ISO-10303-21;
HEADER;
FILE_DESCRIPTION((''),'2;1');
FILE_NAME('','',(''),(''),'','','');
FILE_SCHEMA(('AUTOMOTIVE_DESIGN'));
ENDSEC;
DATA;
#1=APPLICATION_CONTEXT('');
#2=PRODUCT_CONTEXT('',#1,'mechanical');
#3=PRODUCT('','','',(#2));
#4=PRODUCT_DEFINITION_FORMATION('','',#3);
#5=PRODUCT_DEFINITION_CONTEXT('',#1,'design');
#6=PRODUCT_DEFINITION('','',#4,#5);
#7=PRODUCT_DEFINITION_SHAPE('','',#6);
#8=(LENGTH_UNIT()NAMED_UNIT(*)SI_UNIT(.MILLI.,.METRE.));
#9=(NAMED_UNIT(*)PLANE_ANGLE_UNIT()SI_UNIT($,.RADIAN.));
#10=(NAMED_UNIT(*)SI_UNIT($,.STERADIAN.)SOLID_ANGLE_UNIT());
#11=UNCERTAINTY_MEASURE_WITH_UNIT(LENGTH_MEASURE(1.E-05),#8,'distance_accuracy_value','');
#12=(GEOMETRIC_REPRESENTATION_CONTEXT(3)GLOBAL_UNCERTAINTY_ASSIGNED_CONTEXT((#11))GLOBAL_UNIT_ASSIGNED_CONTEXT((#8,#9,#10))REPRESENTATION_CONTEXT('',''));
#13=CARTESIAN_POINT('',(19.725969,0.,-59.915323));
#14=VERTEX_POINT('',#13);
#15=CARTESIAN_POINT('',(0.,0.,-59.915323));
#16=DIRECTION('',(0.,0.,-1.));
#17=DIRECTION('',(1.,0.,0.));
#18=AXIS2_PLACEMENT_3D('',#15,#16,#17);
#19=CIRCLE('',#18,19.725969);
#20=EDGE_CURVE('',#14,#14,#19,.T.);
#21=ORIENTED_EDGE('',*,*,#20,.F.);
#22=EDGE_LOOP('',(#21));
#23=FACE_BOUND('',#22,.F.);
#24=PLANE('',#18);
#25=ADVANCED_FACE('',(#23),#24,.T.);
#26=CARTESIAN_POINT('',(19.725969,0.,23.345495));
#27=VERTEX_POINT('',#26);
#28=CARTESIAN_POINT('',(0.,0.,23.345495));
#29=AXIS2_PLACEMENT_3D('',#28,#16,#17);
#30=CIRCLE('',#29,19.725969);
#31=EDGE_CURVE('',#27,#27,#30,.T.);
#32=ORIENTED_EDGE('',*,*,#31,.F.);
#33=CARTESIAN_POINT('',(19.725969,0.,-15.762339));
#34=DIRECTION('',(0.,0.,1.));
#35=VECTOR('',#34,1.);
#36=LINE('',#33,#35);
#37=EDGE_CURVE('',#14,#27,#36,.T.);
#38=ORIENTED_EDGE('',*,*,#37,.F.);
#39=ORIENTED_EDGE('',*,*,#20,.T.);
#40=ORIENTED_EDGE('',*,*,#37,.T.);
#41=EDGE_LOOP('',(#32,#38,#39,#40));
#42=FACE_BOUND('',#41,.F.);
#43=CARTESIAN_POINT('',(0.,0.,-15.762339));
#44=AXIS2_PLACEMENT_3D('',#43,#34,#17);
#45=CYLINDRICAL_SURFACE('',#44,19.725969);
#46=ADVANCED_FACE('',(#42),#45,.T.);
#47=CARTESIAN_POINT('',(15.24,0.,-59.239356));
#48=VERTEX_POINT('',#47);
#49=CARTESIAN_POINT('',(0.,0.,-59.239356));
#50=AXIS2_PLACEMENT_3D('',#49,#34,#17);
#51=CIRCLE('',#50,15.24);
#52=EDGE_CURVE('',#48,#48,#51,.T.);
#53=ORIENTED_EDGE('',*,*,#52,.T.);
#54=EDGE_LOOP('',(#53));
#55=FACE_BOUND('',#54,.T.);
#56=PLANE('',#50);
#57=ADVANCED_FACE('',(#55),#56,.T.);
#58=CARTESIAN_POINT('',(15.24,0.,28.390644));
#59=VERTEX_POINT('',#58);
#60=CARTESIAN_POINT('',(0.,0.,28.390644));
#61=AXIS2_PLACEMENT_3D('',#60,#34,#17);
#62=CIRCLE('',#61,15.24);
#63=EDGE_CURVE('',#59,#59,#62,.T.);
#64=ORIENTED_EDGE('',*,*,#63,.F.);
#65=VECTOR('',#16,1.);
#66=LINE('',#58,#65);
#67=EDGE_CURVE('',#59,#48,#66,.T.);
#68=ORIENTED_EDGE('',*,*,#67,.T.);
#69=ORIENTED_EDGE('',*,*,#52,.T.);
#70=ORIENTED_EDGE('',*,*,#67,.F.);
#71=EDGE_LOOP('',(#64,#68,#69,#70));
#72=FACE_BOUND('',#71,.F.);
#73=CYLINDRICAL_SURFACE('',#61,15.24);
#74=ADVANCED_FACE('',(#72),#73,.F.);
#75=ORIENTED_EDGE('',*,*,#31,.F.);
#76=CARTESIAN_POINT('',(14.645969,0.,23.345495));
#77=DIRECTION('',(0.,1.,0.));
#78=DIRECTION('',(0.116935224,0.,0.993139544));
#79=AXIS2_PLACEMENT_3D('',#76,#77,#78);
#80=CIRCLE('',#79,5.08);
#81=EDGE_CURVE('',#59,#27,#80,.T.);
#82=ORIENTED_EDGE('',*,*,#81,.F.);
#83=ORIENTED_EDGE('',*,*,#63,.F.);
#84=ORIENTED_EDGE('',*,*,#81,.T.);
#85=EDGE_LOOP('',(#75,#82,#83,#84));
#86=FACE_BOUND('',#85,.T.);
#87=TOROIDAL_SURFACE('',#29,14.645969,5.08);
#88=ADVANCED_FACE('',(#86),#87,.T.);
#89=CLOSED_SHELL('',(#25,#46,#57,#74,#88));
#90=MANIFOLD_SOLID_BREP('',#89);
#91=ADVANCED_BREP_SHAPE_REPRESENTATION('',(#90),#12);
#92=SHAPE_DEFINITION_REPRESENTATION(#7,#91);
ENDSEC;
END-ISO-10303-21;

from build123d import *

# Parameters (mm, degrees)
F0_W     = 19.7259690613
F0_H     = 88.3059669286
F2_R     = 15.24
F3_DEPTH = 87.63


# Not quite as in the source:
# - a fillet or chamfer that OpenCascade refuses, or shapes differently, is made with other operations: its cross-section is extruded or revolved along the edge and cut away or added


with BuildPart() as f1:
    # F0 (on Front) → F1 (revolve)
    with BuildSketch(Plane.XZ):
        with Locations((9.8629845306, -15.7623393461)):
            Rectangle(F0_W, F0_H)
    revolve(axis=Axis((0, 0, 0), (0, 0, -1)))

    # F2 (on face) → F3 (cut)
    with BuildSketch(Plane.XY.offset(28.3906441182)):
        Circle(F2_R)
    extrude(amount=-F3_DEPTH, mode=Mode.SUBTRACT)

    # F4: fillet of radius 5.08 on 1 edges, made by hand

    # F4_s1 → F4_t2 (revolve, cut)
    with BuildSketch(Plane.XZ):
        with BuildLine():
            ThreePointArc((15.24, 28.3906441182), (18.4422881448, 26.7210487336), (19.7259690613, 23.345495236))
            Line((19.7259690613, 23.345495236), (19.7259690613, 28.3906441182))
            Line((19.7259690613, 28.3906441182), (15.24, 28.3906441182))
        make_face()
    revolve(axis=Axis((0, 0, 28.3906441182), (0, 0, -1)), mode=Mode.SUBTRACT)


solid = f1.part
